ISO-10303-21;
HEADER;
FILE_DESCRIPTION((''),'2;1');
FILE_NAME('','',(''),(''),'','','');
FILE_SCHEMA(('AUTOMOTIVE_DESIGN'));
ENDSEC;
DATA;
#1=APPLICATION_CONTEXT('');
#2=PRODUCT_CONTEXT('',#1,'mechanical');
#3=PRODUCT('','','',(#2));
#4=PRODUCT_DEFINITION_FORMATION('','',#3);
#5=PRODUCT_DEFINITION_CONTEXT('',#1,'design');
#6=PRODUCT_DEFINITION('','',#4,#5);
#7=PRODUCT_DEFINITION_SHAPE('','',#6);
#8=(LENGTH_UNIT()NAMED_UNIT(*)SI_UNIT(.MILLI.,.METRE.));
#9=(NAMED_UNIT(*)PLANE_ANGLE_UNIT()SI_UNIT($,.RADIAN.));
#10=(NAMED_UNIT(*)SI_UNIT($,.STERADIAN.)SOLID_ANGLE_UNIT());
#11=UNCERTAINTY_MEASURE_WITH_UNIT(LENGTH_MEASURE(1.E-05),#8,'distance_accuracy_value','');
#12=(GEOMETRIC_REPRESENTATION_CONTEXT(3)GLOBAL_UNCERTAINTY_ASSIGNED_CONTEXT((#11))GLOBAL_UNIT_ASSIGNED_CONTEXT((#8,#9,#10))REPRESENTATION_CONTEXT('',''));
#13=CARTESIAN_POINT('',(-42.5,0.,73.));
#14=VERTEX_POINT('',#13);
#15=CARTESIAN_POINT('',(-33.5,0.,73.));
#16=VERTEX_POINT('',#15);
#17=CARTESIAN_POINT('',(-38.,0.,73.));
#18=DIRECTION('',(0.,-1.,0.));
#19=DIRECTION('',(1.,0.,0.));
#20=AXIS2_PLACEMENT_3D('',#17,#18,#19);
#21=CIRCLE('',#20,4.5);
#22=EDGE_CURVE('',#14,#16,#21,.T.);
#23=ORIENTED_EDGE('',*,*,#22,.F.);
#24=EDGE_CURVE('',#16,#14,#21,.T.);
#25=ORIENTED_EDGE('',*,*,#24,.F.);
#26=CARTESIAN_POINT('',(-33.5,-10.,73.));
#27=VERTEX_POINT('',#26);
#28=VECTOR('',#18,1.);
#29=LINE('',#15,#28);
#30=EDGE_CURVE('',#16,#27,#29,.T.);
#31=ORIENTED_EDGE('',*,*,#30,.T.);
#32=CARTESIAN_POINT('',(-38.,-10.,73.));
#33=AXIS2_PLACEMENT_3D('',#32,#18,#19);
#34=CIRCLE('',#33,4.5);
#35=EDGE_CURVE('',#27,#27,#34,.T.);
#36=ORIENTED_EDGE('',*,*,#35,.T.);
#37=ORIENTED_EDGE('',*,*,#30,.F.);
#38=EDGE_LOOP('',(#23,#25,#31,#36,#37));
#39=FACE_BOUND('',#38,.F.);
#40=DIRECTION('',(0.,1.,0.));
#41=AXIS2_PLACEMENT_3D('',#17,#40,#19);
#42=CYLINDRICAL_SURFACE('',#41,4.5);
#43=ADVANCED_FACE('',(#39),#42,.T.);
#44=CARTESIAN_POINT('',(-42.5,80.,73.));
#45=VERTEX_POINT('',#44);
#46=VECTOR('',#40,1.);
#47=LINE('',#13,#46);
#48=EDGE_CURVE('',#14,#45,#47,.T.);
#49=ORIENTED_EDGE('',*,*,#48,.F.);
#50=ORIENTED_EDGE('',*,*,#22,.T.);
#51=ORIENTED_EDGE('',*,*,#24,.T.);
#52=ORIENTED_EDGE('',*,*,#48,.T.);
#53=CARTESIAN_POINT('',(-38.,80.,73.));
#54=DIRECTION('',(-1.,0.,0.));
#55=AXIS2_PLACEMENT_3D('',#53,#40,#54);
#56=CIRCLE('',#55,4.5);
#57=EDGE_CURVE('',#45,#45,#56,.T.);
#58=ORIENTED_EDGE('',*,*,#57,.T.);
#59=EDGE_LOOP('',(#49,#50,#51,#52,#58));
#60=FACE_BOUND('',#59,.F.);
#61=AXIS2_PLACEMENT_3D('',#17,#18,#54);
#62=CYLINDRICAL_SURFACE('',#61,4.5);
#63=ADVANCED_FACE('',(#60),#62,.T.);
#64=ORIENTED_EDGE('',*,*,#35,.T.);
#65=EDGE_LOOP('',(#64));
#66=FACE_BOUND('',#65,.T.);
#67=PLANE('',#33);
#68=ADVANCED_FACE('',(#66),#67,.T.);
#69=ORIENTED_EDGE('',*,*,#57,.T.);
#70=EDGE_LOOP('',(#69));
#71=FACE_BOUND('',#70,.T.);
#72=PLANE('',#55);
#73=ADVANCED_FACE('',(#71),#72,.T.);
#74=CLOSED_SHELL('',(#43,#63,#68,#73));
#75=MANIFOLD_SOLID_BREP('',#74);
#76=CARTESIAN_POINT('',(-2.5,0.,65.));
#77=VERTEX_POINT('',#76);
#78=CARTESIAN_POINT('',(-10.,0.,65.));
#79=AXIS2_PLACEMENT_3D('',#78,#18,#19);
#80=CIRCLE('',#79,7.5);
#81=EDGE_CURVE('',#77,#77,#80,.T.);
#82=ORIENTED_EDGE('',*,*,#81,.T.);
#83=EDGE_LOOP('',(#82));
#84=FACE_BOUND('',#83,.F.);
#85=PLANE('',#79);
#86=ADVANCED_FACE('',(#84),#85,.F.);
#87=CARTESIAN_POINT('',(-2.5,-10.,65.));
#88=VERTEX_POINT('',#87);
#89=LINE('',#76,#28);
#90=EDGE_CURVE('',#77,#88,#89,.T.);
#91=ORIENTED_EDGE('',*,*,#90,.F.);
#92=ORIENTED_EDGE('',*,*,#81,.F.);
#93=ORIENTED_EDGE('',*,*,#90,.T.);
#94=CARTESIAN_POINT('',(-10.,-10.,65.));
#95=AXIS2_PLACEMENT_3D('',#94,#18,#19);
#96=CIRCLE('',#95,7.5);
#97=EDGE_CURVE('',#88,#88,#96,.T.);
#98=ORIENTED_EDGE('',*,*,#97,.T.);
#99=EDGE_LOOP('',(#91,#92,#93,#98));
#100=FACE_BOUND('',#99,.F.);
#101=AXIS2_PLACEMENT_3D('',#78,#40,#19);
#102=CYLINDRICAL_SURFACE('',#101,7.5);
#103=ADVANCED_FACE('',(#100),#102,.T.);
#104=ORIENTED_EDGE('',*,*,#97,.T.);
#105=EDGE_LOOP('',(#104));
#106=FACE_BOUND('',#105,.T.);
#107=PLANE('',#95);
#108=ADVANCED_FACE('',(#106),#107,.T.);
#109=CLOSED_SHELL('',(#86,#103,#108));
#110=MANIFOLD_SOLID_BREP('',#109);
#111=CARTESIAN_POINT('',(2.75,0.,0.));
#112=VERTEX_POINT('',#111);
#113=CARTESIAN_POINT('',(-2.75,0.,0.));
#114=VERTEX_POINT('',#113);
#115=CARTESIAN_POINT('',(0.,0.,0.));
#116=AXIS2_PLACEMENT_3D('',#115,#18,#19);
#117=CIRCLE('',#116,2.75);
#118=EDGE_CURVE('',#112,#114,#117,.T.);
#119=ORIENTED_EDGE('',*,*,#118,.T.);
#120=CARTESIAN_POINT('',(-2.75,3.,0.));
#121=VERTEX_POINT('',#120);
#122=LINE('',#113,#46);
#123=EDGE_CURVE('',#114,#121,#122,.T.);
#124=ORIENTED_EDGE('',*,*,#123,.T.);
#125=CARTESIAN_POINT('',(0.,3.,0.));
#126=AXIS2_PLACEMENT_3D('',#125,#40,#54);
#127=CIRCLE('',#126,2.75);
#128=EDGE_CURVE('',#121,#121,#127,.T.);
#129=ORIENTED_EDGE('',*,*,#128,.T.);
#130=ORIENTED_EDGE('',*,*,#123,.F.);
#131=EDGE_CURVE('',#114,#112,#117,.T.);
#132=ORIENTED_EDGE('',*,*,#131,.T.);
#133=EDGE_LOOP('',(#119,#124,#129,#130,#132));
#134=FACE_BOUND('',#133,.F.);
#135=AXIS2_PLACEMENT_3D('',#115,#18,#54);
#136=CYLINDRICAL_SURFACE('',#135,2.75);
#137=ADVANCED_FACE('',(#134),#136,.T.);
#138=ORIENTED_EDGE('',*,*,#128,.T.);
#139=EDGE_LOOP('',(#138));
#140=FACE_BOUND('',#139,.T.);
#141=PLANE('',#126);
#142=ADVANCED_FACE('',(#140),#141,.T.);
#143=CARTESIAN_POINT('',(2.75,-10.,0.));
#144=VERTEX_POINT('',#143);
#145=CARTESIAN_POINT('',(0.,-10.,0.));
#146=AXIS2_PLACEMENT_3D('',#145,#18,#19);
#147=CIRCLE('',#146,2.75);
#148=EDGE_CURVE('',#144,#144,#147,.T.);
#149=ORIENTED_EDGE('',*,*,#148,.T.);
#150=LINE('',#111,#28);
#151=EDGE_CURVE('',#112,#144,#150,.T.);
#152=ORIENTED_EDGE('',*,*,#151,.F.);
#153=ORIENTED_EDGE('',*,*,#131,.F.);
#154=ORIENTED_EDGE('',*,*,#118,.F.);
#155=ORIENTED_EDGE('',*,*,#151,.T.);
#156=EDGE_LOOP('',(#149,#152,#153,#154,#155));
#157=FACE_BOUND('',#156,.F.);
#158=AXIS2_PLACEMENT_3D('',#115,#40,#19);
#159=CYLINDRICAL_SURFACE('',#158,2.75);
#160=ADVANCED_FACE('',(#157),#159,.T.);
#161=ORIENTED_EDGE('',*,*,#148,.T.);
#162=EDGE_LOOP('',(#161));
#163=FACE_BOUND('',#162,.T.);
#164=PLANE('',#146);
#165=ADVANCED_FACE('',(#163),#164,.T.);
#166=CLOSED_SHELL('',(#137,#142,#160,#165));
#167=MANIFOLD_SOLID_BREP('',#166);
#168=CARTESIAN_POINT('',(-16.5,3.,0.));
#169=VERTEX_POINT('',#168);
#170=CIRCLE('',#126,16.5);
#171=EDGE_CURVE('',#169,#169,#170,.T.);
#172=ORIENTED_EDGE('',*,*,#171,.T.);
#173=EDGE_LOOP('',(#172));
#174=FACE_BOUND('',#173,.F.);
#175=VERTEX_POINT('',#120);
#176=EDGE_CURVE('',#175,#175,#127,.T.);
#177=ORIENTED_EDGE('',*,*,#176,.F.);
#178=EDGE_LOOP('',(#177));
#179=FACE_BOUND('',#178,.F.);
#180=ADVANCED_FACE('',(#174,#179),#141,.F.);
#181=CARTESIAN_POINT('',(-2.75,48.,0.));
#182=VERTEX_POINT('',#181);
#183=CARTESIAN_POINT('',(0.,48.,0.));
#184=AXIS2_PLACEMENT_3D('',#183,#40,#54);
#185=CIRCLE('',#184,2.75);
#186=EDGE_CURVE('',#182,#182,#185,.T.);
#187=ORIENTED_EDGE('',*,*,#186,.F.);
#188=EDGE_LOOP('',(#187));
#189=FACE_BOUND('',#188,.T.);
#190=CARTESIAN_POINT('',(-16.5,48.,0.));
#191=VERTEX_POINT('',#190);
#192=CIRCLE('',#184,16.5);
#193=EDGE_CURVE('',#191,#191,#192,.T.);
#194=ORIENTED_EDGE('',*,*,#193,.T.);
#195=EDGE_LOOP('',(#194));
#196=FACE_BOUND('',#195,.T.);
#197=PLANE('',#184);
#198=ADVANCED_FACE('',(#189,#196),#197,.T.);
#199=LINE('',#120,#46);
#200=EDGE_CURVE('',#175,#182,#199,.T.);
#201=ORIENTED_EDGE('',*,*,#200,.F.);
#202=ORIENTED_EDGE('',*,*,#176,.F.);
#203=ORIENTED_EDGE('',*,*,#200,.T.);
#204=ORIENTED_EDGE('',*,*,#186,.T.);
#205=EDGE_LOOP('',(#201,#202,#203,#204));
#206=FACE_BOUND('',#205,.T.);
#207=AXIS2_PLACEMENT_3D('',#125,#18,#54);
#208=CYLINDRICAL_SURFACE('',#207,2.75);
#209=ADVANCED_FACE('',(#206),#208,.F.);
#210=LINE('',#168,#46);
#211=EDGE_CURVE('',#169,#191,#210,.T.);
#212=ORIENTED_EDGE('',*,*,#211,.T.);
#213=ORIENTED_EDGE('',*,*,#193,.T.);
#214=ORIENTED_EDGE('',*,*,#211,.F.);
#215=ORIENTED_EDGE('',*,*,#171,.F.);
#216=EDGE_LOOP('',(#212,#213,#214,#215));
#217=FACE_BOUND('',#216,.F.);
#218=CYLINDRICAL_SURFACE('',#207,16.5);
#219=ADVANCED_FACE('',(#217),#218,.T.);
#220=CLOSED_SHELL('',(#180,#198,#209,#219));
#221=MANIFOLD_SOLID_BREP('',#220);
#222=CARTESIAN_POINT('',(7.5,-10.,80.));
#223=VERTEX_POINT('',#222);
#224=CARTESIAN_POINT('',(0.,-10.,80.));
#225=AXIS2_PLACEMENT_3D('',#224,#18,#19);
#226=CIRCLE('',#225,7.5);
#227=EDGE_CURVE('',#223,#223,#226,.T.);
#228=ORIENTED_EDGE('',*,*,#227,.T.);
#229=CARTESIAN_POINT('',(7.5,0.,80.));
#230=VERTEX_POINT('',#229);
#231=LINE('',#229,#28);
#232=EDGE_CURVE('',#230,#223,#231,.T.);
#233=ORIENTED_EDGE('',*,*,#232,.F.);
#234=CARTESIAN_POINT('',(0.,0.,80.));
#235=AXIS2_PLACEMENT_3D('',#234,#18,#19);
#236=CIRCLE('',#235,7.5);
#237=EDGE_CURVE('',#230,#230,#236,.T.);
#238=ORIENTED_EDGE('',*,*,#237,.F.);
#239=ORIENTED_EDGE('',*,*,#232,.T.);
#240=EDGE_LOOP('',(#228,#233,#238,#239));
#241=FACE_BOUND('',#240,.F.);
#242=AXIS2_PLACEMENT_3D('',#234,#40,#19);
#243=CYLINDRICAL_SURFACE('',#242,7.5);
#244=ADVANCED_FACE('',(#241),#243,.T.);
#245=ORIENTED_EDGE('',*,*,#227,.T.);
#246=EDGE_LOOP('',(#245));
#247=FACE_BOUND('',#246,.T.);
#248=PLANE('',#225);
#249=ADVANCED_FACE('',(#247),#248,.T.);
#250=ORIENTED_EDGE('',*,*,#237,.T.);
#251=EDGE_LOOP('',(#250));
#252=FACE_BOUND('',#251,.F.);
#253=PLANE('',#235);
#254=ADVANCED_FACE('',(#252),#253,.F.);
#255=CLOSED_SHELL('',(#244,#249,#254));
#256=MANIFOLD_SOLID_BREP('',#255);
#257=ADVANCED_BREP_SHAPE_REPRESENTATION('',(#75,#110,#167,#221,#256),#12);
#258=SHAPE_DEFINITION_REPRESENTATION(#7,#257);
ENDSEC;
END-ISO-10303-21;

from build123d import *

# Parameters (mm, degrees)
F0_R     = 7.5
F1_DEPTH = 10
F0_R_2   = 4.5
F0_R_3   = 2.75
F3_R     = 4.5
F4_DEPTH = 80
F5_R     = 2.75
F6_DEPTH = 3
F7_R     = 16.5
F7_R_2   = 2.75
F8_DEPTH = 45


# Not quite as in the source:
# - the program builds the solid bodies; features that only make, move or delete a surface that nothing else refers to are left out


with BuildPart() as f1:
    # F0 (on Front) → F1 (new body)
    with BuildSketch(Plane.XZ):
        with Locations((0, 80)):
            Circle(F0_R)
    extrude(amount=F1_DEPTH)


with BuildPart() as f1b:
    # F0 (on Front) → F1, piece 2 (new body)
    with BuildSketch(Plane.XZ):
        with Locations((-38, 73)):
            Circle(F0_R_2)
    extrude(amount=F1_DEPTH)

    # F3 (on face) → F4 (join)
    with BuildSketch(Plane(origin=(0, 0, 0), x_dir=(-1, 0, 0), z_dir=(0, 1, 0))):
        with Locations((38, 73)):
            Circle(F3_R)
    extrude(amount=F4_DEPTH)


with BuildPart() as f1c:
    # F0 (on Front) → F1, piece 3 (new body)
    with BuildSketch(Plane.XZ):
        with Locations((-10, 65)):
            Circle(F0_R)
    extrude(amount=F1_DEPTH)


with BuildPart() as f1d:
    # F0 (on Front) → F1, piece 4 (new body)
    with BuildSketch(Plane.XZ):
        Circle(F0_R_3)
    extrude(amount=F1_DEPTH)

    # F5 (on face) → F6 (join)
    with BuildSketch(Plane(origin=(0, 0, 0), x_dir=(-1, 0, 0), z_dir=(0, 1, 0))):
        Circle(F5_R)
    extrude(amount=F6_DEPTH)


with BuildPart() as f8:
    # F7 (on face) → F8 (new body)
    with BuildSketch(Plane(origin=(0, 3, 0), x_dir=(-1, 0, 0), z_dir=(0, 1, 0))):
        Circle(F7_R)
        Circle(F7_R_2, mode=Mode.SUBTRACT)
    extrude(amount=F8_DEPTH)


solid = Compound([f1.part, f1b.part, f1c.part, f1d.part, f8.part])
